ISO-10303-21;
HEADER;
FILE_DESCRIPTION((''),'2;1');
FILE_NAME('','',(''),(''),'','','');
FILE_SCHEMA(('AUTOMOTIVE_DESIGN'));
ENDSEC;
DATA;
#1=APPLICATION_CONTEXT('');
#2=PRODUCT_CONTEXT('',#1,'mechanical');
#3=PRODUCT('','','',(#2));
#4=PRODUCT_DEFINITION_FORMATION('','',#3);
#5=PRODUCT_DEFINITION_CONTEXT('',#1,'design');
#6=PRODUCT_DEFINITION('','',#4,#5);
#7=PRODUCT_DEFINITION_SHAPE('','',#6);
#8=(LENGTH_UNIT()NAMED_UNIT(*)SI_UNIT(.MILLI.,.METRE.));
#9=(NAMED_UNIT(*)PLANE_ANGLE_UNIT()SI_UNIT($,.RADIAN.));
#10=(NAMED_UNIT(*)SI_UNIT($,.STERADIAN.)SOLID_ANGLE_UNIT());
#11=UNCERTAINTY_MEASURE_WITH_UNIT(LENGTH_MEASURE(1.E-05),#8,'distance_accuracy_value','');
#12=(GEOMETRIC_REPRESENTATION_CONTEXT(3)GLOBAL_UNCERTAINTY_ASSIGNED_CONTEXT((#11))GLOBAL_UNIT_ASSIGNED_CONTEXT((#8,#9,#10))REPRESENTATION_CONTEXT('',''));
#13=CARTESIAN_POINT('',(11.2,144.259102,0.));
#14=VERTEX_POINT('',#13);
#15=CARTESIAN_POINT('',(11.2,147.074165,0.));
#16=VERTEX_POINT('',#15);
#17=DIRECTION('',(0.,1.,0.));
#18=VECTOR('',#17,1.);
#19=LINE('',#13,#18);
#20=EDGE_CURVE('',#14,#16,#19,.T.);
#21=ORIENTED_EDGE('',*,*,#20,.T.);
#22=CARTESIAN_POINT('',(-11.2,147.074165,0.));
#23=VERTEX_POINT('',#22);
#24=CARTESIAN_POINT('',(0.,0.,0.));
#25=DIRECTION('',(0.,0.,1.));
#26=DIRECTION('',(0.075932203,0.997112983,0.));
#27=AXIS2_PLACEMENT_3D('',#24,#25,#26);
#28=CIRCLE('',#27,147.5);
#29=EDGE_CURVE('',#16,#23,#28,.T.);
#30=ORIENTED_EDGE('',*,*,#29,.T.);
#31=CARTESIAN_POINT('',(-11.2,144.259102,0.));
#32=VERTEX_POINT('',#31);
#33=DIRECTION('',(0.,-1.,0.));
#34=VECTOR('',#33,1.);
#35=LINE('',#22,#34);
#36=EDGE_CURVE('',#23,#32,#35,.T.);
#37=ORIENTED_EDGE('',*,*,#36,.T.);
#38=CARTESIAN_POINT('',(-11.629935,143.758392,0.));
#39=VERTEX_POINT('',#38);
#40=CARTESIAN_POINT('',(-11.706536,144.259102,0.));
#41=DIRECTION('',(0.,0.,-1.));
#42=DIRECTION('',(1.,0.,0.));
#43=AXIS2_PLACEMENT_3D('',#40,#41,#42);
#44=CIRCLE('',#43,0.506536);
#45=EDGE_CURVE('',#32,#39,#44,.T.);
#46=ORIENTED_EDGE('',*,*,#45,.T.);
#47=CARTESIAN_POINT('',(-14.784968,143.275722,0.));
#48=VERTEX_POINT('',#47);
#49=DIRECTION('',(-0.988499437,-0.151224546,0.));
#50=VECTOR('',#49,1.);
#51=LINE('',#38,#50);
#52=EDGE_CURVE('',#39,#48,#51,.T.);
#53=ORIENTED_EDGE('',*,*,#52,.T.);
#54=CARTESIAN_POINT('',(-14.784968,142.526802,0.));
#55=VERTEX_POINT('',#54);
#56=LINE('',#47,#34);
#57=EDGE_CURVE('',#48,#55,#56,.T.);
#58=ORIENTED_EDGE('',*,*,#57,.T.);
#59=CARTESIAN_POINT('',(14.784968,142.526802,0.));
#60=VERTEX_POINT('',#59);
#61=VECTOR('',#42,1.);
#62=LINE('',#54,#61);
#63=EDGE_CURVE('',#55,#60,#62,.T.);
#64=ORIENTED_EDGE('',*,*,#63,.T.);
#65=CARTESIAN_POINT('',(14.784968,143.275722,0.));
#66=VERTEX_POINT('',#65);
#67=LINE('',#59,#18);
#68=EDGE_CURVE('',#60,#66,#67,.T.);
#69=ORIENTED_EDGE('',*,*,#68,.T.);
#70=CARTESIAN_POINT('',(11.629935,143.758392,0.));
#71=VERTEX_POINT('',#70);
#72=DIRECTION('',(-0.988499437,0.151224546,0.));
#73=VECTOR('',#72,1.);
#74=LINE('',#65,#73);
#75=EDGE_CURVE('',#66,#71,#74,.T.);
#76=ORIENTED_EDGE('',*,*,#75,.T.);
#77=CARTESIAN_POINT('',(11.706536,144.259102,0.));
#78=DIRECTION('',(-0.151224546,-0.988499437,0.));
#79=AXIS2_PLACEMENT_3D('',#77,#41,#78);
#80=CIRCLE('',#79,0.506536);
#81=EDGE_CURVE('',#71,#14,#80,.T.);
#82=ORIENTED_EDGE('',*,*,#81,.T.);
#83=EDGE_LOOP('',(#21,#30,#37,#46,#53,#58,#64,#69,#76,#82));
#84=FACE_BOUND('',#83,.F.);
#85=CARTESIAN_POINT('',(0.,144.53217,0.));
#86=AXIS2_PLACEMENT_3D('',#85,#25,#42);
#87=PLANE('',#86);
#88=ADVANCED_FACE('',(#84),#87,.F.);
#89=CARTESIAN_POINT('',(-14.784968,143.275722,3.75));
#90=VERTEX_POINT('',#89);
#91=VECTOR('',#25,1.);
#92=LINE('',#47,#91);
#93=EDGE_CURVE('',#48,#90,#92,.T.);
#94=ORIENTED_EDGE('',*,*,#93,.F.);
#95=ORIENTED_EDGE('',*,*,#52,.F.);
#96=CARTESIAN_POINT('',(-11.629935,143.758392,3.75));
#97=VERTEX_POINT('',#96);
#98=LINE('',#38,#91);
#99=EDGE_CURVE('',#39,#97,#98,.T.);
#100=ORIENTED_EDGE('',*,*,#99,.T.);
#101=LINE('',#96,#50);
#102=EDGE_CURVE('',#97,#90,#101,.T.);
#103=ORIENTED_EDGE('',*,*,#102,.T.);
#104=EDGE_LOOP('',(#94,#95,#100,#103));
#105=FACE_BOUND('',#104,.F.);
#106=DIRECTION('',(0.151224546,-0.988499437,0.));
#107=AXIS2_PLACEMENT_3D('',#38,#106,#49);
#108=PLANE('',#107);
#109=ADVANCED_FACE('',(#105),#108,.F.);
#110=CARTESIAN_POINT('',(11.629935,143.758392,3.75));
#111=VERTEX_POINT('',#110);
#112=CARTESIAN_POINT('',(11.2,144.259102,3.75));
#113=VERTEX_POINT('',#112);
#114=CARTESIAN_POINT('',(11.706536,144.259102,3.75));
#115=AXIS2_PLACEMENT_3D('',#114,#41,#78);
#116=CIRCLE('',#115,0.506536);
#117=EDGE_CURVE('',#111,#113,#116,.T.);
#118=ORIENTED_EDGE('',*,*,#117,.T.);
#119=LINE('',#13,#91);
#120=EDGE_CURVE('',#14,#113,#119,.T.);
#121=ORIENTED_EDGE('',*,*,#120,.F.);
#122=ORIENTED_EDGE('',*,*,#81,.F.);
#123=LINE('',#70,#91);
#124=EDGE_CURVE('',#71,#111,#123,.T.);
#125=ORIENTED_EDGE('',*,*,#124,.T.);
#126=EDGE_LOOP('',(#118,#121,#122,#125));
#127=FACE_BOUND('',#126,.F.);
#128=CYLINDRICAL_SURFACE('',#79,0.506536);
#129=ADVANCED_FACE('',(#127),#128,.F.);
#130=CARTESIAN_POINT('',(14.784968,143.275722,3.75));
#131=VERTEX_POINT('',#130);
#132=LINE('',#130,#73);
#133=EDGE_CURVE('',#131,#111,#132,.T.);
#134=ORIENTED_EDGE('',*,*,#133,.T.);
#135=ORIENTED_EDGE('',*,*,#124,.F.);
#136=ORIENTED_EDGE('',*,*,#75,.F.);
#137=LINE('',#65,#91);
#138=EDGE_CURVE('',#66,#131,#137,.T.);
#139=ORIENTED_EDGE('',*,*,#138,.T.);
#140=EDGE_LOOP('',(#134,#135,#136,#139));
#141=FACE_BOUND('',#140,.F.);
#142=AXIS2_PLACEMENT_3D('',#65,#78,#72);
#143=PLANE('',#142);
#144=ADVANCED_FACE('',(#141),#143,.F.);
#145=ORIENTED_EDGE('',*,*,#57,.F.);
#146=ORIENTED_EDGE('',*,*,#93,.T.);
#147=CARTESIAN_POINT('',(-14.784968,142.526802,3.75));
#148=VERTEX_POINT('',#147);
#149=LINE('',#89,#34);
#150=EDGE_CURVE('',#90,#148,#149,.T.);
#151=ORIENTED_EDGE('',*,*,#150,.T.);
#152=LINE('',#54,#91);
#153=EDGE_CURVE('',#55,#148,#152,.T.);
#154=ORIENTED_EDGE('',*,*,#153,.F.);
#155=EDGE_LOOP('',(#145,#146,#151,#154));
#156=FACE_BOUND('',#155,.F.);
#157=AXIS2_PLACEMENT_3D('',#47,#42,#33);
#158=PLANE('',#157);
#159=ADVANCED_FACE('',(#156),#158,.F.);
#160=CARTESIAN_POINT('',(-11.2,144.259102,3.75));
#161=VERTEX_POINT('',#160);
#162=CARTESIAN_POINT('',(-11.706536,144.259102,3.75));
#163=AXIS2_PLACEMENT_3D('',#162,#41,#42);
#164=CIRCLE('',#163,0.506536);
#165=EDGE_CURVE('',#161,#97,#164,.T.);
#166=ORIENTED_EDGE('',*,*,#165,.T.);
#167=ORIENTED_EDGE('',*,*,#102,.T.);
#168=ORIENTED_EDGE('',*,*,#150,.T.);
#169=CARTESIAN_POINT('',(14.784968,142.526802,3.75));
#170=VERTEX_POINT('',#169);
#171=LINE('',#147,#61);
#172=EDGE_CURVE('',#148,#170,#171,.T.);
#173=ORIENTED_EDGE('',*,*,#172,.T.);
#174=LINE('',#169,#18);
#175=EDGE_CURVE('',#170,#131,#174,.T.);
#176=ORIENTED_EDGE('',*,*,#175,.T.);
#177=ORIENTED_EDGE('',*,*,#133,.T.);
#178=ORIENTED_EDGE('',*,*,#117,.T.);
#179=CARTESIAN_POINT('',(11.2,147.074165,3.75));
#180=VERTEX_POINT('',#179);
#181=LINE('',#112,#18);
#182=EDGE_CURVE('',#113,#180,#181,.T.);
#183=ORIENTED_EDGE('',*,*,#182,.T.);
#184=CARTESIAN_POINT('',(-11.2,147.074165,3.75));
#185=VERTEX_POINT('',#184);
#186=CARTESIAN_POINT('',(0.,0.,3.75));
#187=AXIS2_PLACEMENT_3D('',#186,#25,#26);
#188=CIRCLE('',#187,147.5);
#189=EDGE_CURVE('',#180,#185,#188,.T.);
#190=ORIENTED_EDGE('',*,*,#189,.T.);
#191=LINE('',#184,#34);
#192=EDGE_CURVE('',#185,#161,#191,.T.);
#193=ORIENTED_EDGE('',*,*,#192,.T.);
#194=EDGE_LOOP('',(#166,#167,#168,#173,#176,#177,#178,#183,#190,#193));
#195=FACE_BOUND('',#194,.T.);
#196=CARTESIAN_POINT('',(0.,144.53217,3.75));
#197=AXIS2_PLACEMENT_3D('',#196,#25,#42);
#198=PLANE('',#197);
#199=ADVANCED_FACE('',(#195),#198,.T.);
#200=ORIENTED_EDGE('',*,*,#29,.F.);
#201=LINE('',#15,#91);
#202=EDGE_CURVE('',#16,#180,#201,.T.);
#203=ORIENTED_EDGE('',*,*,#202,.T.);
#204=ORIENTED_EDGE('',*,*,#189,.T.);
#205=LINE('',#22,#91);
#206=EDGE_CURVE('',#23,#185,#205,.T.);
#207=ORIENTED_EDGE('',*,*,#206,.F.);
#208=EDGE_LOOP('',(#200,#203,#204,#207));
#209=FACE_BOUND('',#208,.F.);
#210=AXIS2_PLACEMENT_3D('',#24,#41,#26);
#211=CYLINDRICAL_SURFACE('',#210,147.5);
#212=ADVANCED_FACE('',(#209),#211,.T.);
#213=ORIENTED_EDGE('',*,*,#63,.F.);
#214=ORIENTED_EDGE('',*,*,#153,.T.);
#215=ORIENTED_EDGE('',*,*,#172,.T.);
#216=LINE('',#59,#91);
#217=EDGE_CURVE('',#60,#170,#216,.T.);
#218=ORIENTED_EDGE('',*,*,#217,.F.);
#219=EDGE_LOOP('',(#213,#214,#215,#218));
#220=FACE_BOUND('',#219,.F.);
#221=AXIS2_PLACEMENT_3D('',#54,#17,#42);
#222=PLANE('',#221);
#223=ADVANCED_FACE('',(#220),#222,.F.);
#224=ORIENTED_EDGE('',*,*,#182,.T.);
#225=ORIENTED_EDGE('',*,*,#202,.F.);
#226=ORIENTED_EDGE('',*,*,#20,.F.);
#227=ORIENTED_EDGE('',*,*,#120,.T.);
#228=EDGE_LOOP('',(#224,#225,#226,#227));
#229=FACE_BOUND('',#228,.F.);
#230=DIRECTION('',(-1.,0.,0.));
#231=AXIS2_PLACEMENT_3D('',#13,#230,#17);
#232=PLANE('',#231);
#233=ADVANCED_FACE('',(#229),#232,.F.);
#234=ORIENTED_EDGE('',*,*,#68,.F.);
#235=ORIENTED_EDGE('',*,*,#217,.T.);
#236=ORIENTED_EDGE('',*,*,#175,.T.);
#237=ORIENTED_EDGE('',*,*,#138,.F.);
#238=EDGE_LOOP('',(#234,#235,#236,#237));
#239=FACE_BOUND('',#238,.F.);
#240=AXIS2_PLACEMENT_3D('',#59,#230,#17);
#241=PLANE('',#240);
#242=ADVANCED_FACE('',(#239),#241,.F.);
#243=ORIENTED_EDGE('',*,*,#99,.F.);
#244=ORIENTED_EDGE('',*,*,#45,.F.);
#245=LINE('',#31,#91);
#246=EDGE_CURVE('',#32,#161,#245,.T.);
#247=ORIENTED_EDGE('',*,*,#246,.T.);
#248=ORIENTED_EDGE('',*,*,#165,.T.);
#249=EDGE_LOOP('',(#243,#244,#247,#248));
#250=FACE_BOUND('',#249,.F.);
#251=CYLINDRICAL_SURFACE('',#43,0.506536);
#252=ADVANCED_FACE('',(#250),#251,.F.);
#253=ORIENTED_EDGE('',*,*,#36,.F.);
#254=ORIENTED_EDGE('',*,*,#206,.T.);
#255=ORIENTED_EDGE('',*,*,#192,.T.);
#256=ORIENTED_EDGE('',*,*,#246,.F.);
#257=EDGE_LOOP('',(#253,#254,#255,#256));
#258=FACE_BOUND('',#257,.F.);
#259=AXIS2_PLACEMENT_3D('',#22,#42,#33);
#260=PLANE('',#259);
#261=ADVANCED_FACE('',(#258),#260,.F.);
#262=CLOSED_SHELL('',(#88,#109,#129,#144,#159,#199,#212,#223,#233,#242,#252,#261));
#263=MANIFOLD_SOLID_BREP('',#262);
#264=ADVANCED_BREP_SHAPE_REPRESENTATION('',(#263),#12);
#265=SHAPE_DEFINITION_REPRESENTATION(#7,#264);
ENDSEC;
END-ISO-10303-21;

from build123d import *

# Parameters (mm, degrees)
F1_DEPTH = 3.75


# Not quite as in the source:
# - a feature of the source that left no trace in its solid (it failed there, or was rolled back) is left out


with BuildPart() as f1:
    # F0 (on Top) → F1 (new body)
    with BuildSketch(Plane.XY):
        with BuildLine():
            Line((11.2, 144.2591021933), (11.2, 147.0741649645))
            ThreePointArc((11.2, 147.0741649645), (0, 147.5), (-11.2, 147.0741649645))
            Line((-11.2, 147.0741649645), (-11.2, 144.2591021933))
            ThreePointArc((-11.2, 144.2591021933), (-11.3222315822, 143.9291191636), (-11.6299352058, 143.7583917795))
            Line((-11.6299352058, 143.7583917795), (-14.7849675268, 143.2757224802))
            Line((-14.7849675268, 143.2757224802), (-14.7849675268, 142.5268018024))
            Line((-14.7849675268, 142.5268018024), (-11.2, 142.5268018024))
            Line((-11.2, 142.5268018024), (11.2, 142.5268018024))
            Line((11.2, 142.5268018024), (14.7849675268, 142.5268018024))
            Line((14.7849675268, 142.5268018024), (14.7849675268, 143.2757224802))
            Line((14.7849675268, 143.2757224802), (11.6299352058, 143.7583917795))
            ThreePointArc((11.6299352058, 143.7583917795), (11.3222315822, 143.9291191636), (11.2, 144.2591021933))
        make_face()
    extrude(amount=F1_DEPTH)


solid = f1.part
